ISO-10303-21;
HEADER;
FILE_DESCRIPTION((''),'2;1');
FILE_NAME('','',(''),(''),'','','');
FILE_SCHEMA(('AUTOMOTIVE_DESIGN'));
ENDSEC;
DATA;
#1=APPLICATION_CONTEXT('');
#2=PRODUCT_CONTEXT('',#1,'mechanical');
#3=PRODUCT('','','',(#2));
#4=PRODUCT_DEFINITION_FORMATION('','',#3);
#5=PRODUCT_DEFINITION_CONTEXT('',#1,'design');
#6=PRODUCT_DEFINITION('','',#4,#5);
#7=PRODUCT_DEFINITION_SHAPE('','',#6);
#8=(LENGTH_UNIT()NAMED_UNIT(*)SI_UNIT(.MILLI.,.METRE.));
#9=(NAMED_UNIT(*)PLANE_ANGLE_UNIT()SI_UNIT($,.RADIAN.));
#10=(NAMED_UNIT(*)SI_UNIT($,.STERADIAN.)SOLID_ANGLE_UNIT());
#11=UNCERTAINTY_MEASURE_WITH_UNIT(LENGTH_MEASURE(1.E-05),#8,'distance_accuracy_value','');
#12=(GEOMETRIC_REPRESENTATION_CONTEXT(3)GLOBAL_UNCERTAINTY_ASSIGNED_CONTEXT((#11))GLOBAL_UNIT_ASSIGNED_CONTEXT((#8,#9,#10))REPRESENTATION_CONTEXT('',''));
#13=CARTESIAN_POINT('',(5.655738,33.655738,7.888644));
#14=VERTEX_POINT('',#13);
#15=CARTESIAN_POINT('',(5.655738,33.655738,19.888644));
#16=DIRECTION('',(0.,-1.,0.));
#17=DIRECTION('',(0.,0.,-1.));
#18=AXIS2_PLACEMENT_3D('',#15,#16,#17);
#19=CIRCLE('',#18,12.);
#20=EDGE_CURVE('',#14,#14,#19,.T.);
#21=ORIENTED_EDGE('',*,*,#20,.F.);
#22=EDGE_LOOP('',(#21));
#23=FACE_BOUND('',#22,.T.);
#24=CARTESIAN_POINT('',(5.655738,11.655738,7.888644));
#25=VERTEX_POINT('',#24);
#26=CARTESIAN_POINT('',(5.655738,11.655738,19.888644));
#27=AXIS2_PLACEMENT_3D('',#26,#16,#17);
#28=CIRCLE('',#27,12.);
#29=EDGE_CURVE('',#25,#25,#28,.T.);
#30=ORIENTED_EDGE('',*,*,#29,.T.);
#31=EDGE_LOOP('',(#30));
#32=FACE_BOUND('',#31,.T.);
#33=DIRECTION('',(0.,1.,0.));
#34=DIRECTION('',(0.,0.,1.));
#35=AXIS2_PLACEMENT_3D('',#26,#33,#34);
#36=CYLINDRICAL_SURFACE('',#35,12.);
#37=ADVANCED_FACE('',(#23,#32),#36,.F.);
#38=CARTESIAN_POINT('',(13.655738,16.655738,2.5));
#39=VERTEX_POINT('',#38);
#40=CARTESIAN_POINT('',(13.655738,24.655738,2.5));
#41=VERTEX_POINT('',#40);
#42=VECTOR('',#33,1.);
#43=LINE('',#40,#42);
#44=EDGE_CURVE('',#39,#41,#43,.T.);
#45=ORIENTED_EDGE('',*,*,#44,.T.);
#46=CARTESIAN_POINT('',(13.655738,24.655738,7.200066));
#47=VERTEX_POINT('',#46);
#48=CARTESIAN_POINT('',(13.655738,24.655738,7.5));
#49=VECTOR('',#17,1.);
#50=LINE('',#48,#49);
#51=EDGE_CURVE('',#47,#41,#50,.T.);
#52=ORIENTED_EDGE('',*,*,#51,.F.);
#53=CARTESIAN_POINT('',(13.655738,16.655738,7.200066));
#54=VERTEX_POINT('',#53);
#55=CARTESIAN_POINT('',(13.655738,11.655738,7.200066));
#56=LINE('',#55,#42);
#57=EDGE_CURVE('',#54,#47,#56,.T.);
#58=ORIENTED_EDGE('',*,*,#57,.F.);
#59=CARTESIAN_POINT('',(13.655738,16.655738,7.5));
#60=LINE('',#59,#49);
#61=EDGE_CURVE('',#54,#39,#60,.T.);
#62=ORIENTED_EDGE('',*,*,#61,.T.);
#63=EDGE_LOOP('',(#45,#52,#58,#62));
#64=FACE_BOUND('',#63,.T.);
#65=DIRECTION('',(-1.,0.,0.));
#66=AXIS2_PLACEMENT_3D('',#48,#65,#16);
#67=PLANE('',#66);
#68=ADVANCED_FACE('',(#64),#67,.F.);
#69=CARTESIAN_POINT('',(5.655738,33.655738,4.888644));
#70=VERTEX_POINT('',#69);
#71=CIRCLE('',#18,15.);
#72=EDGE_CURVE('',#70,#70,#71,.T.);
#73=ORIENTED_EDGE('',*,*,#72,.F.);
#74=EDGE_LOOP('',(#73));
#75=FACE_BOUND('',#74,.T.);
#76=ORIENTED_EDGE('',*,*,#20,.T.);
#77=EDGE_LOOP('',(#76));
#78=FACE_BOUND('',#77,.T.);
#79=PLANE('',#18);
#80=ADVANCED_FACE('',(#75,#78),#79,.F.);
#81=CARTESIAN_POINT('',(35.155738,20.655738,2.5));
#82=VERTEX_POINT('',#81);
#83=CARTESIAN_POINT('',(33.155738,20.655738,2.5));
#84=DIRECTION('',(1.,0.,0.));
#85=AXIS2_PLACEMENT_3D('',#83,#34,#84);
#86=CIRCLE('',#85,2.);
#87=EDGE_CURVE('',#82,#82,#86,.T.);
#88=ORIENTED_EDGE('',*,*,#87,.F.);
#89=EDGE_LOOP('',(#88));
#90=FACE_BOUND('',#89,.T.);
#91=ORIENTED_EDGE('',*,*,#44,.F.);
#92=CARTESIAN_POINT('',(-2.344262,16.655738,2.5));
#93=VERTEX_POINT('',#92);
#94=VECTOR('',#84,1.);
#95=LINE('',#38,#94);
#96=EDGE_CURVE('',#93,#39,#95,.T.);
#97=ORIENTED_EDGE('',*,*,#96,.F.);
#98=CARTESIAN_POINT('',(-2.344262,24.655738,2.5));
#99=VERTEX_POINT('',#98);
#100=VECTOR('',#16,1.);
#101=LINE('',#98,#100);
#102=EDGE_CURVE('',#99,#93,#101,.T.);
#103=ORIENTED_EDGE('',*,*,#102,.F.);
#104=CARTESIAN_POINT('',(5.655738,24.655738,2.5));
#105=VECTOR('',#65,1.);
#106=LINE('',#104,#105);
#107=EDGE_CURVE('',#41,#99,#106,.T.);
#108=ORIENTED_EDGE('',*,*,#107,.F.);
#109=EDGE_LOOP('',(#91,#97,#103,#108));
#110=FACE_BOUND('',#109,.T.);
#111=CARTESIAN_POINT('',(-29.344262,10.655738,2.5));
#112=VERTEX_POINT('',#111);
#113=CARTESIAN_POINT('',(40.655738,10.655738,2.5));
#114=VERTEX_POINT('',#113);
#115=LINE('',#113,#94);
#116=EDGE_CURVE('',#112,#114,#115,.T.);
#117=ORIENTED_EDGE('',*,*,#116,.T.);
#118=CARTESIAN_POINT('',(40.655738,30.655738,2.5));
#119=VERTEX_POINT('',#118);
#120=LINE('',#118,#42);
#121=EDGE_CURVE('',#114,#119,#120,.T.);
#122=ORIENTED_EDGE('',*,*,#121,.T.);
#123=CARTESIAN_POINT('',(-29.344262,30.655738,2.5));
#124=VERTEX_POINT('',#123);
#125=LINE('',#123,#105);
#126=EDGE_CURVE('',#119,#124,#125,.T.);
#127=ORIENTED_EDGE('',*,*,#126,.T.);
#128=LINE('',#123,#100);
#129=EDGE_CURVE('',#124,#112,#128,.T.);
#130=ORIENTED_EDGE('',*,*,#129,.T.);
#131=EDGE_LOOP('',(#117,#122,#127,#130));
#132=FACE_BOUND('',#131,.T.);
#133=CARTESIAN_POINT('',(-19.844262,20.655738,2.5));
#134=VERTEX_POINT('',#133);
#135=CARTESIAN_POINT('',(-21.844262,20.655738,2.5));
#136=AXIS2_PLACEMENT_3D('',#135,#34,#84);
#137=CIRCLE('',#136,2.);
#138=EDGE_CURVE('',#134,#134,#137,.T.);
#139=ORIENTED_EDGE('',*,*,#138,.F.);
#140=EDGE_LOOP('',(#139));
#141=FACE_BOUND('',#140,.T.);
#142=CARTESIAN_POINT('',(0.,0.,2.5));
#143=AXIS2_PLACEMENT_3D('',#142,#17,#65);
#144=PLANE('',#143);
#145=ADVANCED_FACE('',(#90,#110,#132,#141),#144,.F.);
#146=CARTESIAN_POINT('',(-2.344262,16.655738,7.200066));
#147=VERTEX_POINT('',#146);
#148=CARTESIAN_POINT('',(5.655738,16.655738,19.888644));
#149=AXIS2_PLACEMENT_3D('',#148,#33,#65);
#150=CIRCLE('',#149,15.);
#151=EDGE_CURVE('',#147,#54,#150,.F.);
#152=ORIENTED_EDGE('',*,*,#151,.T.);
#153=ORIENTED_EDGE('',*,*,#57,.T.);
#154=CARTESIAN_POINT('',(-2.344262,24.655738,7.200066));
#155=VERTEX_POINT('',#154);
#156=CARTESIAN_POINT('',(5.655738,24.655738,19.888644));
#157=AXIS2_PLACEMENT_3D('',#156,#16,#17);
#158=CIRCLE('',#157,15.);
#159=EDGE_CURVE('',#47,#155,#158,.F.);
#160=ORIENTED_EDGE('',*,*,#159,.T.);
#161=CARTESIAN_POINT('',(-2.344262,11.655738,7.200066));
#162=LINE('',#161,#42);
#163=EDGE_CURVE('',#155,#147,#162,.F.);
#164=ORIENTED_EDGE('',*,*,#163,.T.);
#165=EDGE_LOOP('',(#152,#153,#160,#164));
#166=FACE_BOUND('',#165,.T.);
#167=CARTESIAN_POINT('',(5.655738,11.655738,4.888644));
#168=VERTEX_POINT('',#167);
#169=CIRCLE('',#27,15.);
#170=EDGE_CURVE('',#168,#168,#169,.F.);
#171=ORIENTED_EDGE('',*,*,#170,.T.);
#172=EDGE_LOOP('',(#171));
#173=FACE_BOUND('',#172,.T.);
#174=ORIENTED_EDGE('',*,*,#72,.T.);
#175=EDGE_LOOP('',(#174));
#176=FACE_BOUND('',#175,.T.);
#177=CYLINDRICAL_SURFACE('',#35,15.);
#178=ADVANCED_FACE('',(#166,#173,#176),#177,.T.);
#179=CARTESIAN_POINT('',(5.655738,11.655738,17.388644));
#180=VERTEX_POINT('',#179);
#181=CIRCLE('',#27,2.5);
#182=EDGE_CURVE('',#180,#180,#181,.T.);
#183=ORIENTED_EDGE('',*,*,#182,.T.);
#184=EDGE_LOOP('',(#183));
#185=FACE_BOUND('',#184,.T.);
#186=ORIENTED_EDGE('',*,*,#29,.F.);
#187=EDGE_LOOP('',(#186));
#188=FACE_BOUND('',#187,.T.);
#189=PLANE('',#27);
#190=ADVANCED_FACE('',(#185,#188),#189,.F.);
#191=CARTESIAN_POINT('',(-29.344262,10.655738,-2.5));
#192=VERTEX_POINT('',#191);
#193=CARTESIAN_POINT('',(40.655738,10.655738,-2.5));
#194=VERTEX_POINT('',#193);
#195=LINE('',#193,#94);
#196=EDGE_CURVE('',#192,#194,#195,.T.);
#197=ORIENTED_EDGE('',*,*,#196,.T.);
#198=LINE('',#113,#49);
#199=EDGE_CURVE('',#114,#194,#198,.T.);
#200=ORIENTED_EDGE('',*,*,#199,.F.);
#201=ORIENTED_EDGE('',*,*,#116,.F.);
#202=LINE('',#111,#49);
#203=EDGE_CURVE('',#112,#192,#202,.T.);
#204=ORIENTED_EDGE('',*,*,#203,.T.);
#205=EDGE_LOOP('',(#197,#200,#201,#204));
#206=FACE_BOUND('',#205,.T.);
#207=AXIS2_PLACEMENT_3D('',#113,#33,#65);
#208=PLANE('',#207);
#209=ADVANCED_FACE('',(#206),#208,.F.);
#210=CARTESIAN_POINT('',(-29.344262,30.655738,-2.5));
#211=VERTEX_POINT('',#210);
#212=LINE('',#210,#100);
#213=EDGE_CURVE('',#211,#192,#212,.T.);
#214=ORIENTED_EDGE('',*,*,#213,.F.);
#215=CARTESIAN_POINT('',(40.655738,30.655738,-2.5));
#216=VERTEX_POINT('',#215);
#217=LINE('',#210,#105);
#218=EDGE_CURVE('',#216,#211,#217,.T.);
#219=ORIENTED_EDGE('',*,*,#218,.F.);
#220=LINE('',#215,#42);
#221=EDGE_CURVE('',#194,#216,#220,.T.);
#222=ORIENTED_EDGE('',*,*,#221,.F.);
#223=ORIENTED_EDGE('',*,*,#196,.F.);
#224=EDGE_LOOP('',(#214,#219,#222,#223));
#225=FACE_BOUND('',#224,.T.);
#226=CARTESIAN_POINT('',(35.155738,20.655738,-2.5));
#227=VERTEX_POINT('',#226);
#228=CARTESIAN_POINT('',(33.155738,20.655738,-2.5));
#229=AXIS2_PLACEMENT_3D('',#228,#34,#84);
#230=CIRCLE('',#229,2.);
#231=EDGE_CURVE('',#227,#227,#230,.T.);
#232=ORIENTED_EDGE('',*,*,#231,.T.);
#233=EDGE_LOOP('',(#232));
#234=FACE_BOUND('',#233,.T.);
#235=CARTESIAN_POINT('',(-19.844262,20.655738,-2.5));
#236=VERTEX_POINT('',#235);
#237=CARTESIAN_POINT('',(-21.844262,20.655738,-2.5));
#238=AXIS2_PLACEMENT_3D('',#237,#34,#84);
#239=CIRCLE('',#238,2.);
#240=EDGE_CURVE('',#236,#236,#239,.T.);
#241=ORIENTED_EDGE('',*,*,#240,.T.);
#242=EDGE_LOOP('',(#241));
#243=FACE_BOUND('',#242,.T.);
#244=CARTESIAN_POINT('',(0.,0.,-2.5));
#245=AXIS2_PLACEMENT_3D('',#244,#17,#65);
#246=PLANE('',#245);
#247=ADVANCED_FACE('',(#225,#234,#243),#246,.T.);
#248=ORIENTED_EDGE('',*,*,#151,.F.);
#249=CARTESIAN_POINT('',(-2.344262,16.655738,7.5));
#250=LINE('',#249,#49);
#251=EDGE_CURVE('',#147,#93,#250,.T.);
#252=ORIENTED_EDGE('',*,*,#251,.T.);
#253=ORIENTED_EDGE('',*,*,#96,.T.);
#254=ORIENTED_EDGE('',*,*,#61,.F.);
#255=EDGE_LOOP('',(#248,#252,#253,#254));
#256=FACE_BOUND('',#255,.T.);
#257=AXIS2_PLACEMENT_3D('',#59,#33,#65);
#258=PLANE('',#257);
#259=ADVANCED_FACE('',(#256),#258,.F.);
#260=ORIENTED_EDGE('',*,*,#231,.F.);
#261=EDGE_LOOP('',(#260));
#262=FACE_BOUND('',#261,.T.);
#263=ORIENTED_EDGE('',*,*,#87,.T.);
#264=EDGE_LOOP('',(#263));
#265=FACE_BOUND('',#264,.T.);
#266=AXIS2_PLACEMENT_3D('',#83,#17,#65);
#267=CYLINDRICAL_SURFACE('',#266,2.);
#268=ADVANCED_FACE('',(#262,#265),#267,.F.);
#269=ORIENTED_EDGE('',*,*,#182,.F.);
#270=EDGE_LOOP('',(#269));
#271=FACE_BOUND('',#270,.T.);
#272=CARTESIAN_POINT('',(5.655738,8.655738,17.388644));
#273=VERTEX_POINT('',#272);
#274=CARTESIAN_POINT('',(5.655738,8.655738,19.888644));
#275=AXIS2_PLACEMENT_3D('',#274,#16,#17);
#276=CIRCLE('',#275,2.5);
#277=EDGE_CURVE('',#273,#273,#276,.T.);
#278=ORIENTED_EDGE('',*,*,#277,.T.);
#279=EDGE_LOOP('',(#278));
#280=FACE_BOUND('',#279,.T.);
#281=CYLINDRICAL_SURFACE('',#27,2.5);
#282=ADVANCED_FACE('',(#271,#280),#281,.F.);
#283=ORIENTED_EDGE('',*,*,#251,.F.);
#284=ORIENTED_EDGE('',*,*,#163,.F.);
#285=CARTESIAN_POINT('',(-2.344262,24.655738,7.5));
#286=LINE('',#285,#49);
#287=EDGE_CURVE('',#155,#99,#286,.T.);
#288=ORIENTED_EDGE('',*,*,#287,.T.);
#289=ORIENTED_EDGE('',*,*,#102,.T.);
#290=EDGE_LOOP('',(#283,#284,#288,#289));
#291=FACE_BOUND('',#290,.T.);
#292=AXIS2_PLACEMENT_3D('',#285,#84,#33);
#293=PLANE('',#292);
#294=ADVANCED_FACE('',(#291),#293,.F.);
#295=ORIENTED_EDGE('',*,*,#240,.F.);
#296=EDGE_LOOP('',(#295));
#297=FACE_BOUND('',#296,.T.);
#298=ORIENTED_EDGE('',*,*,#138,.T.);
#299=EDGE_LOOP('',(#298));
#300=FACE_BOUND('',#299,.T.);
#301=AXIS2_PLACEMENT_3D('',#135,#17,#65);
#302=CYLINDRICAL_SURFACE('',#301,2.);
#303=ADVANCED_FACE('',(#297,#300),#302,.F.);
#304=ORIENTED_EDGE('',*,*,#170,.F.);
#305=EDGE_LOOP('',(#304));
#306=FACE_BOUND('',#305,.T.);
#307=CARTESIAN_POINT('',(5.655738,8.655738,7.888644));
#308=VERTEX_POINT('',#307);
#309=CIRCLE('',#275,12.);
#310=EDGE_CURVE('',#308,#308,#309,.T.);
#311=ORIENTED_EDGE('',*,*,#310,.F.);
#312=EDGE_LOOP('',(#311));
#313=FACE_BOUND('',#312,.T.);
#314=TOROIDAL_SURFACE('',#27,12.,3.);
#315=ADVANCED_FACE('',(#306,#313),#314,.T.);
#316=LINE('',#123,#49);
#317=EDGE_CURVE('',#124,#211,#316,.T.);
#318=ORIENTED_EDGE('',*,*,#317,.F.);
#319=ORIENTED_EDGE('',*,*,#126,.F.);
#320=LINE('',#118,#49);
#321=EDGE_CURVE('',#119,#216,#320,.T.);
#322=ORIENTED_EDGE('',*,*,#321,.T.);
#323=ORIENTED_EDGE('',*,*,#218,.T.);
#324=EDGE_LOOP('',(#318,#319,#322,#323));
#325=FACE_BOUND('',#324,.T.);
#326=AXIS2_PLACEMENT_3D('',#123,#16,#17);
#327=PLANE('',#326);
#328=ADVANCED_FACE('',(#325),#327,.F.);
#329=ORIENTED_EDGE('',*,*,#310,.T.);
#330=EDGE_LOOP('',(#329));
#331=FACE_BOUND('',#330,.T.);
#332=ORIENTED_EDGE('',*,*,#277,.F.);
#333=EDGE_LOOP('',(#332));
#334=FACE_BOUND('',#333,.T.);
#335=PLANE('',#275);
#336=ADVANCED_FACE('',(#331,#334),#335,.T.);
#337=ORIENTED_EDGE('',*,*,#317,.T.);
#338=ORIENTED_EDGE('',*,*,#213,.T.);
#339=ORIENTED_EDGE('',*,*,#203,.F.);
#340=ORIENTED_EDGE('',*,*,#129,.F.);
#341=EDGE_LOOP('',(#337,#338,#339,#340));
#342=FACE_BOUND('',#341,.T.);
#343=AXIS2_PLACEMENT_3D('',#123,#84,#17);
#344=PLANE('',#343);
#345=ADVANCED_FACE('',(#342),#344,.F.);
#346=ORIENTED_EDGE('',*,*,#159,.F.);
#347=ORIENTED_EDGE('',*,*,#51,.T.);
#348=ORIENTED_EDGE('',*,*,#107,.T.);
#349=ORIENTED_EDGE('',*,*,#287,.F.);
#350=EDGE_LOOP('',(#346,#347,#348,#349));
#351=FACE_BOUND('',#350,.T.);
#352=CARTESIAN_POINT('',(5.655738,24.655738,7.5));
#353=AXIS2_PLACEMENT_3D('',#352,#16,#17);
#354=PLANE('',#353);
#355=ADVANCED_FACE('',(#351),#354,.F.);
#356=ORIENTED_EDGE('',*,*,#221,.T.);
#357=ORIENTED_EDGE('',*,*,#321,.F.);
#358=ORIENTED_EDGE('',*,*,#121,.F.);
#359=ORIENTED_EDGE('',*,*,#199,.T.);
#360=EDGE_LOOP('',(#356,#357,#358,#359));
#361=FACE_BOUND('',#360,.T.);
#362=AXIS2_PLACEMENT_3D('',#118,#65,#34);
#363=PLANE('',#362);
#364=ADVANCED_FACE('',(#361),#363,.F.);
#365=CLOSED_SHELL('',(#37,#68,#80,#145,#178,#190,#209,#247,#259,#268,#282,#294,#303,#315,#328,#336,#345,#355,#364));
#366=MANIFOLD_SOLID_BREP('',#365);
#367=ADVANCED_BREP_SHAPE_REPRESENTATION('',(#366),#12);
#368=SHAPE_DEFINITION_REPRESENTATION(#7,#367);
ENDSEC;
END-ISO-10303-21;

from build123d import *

# Parameters (mm, degrees)
SKETCH1_W                = 70
SKETCH1_H                = 20
SKETCH1_R                = 2
BOSS_EXTRUDE1_DEPTH      = 2.5
BOSS_EXTRUDE2_DEPTH      = 5
BOSS_EXTRUDE3_DEPTH      = 5
BOSS_EXTRUDE3_DEPTH_BACK = 17
SKETCH6_R                = 15
SKETCH6_R_2              = 12
SKETCH10_R               = 15
BOSS_EXTRUDE4_DEPTH      = 3
SKETCH11_R               = 2.5
CUT_EXTRUDE1_DEPTH       = 3
FILLET1_R                = 3


with BuildPart() as part:
    # Sketch1 → Boss-Extrude1 (new, symmetric)
    with BuildSketch(Plane.XY):
        with Locations((5.655737705, 20.655737705)):
            Rectangle(SKETCH1_W, SKETCH1_H)
        with Locations((-21.844262295, 20.655737705)):
            Circle(SKETCH1_R, mode=Mode.SUBTRACT)
        with Locations((33.155737705, 20.655737705)):
            Circle(SKETCH1_R, mode=Mode.SUBTRACT)
    extrude(amount=BOSS_EXTRUDE1_DEPTH, both=True)

    # Sketch4 → Boss-Extrude2 (add)
    with BuildSketch(Plane.XY.offset(2.5)):
        Polygon((5.655737705, 24.655737705), (13.655737705, 24.655737705), (13.655737705, 16.655737705), (5.655737705, 16.655737705), (-2.344262295, 16.655737705), (-2.344262295, 24.655737705), align=None)
    extrude(amount=BOSS_EXTRUDE2_DEPTH)

    # Sketch6 → Boss-Extrude3 (add, two sides: drawn at the far end of the back side and taken through both)
    with BuildSketch(Plane(origin=(0, 16.655737705, 0), x_dir=(-1, 0, 0), z_dir=(0, -1, 0)).offset(-BOSS_EXTRUDE3_DEPTH_BACK)):
        with Locations(Location((-5.655737705, -19.888643818, 0), (0, 0, 90))):
            Circle(SKETCH6_R)
        with Locations(Location((-5.655737705, -19.888643818, 0), (0, 0, 90))):
            Circle(SKETCH6_R_2, mode=Mode.SUBTRACT)
    extrude(amount=BOSS_EXTRUDE3_DEPTH + BOSS_EXTRUDE3_DEPTH_BACK)

    # Sketch10 → Boss-Extrude4 (add)
    with BuildSketch(Plane.XZ.offset(-11.655737705)):
        with Locations(Location((5.655737705, 19.888643818, 0), (0, 0, 270))):
            Circle(SKETCH10_R)
    extrude(amount=BOSS_EXTRUDE4_DEPTH)

    # Sketch11 → Cut-Extrude1 (cut)
    with BuildSketch(Plane.XZ.offset(-8.655737705)):
        with Locations(Location((5.655737705, 19.888643818, 0), (0, 0, 270))):
            Circle(SKETCH11_R)
    extrude(amount=-CUT_EXTRUDE1_DEPTH, mode=Mode.SUBTRACT)

    # Fillet1
    fillet1_edges = [part.edges().sort_by_distance(p)[0] for p in [
        (5.655737705, 8.655737705, 34.888643818),
    ]]
    fillet(fillet1_edges, radius=FILLET1_R - 0.0001)  # a hair under: the kernel refuses the full size


solid = part.part
